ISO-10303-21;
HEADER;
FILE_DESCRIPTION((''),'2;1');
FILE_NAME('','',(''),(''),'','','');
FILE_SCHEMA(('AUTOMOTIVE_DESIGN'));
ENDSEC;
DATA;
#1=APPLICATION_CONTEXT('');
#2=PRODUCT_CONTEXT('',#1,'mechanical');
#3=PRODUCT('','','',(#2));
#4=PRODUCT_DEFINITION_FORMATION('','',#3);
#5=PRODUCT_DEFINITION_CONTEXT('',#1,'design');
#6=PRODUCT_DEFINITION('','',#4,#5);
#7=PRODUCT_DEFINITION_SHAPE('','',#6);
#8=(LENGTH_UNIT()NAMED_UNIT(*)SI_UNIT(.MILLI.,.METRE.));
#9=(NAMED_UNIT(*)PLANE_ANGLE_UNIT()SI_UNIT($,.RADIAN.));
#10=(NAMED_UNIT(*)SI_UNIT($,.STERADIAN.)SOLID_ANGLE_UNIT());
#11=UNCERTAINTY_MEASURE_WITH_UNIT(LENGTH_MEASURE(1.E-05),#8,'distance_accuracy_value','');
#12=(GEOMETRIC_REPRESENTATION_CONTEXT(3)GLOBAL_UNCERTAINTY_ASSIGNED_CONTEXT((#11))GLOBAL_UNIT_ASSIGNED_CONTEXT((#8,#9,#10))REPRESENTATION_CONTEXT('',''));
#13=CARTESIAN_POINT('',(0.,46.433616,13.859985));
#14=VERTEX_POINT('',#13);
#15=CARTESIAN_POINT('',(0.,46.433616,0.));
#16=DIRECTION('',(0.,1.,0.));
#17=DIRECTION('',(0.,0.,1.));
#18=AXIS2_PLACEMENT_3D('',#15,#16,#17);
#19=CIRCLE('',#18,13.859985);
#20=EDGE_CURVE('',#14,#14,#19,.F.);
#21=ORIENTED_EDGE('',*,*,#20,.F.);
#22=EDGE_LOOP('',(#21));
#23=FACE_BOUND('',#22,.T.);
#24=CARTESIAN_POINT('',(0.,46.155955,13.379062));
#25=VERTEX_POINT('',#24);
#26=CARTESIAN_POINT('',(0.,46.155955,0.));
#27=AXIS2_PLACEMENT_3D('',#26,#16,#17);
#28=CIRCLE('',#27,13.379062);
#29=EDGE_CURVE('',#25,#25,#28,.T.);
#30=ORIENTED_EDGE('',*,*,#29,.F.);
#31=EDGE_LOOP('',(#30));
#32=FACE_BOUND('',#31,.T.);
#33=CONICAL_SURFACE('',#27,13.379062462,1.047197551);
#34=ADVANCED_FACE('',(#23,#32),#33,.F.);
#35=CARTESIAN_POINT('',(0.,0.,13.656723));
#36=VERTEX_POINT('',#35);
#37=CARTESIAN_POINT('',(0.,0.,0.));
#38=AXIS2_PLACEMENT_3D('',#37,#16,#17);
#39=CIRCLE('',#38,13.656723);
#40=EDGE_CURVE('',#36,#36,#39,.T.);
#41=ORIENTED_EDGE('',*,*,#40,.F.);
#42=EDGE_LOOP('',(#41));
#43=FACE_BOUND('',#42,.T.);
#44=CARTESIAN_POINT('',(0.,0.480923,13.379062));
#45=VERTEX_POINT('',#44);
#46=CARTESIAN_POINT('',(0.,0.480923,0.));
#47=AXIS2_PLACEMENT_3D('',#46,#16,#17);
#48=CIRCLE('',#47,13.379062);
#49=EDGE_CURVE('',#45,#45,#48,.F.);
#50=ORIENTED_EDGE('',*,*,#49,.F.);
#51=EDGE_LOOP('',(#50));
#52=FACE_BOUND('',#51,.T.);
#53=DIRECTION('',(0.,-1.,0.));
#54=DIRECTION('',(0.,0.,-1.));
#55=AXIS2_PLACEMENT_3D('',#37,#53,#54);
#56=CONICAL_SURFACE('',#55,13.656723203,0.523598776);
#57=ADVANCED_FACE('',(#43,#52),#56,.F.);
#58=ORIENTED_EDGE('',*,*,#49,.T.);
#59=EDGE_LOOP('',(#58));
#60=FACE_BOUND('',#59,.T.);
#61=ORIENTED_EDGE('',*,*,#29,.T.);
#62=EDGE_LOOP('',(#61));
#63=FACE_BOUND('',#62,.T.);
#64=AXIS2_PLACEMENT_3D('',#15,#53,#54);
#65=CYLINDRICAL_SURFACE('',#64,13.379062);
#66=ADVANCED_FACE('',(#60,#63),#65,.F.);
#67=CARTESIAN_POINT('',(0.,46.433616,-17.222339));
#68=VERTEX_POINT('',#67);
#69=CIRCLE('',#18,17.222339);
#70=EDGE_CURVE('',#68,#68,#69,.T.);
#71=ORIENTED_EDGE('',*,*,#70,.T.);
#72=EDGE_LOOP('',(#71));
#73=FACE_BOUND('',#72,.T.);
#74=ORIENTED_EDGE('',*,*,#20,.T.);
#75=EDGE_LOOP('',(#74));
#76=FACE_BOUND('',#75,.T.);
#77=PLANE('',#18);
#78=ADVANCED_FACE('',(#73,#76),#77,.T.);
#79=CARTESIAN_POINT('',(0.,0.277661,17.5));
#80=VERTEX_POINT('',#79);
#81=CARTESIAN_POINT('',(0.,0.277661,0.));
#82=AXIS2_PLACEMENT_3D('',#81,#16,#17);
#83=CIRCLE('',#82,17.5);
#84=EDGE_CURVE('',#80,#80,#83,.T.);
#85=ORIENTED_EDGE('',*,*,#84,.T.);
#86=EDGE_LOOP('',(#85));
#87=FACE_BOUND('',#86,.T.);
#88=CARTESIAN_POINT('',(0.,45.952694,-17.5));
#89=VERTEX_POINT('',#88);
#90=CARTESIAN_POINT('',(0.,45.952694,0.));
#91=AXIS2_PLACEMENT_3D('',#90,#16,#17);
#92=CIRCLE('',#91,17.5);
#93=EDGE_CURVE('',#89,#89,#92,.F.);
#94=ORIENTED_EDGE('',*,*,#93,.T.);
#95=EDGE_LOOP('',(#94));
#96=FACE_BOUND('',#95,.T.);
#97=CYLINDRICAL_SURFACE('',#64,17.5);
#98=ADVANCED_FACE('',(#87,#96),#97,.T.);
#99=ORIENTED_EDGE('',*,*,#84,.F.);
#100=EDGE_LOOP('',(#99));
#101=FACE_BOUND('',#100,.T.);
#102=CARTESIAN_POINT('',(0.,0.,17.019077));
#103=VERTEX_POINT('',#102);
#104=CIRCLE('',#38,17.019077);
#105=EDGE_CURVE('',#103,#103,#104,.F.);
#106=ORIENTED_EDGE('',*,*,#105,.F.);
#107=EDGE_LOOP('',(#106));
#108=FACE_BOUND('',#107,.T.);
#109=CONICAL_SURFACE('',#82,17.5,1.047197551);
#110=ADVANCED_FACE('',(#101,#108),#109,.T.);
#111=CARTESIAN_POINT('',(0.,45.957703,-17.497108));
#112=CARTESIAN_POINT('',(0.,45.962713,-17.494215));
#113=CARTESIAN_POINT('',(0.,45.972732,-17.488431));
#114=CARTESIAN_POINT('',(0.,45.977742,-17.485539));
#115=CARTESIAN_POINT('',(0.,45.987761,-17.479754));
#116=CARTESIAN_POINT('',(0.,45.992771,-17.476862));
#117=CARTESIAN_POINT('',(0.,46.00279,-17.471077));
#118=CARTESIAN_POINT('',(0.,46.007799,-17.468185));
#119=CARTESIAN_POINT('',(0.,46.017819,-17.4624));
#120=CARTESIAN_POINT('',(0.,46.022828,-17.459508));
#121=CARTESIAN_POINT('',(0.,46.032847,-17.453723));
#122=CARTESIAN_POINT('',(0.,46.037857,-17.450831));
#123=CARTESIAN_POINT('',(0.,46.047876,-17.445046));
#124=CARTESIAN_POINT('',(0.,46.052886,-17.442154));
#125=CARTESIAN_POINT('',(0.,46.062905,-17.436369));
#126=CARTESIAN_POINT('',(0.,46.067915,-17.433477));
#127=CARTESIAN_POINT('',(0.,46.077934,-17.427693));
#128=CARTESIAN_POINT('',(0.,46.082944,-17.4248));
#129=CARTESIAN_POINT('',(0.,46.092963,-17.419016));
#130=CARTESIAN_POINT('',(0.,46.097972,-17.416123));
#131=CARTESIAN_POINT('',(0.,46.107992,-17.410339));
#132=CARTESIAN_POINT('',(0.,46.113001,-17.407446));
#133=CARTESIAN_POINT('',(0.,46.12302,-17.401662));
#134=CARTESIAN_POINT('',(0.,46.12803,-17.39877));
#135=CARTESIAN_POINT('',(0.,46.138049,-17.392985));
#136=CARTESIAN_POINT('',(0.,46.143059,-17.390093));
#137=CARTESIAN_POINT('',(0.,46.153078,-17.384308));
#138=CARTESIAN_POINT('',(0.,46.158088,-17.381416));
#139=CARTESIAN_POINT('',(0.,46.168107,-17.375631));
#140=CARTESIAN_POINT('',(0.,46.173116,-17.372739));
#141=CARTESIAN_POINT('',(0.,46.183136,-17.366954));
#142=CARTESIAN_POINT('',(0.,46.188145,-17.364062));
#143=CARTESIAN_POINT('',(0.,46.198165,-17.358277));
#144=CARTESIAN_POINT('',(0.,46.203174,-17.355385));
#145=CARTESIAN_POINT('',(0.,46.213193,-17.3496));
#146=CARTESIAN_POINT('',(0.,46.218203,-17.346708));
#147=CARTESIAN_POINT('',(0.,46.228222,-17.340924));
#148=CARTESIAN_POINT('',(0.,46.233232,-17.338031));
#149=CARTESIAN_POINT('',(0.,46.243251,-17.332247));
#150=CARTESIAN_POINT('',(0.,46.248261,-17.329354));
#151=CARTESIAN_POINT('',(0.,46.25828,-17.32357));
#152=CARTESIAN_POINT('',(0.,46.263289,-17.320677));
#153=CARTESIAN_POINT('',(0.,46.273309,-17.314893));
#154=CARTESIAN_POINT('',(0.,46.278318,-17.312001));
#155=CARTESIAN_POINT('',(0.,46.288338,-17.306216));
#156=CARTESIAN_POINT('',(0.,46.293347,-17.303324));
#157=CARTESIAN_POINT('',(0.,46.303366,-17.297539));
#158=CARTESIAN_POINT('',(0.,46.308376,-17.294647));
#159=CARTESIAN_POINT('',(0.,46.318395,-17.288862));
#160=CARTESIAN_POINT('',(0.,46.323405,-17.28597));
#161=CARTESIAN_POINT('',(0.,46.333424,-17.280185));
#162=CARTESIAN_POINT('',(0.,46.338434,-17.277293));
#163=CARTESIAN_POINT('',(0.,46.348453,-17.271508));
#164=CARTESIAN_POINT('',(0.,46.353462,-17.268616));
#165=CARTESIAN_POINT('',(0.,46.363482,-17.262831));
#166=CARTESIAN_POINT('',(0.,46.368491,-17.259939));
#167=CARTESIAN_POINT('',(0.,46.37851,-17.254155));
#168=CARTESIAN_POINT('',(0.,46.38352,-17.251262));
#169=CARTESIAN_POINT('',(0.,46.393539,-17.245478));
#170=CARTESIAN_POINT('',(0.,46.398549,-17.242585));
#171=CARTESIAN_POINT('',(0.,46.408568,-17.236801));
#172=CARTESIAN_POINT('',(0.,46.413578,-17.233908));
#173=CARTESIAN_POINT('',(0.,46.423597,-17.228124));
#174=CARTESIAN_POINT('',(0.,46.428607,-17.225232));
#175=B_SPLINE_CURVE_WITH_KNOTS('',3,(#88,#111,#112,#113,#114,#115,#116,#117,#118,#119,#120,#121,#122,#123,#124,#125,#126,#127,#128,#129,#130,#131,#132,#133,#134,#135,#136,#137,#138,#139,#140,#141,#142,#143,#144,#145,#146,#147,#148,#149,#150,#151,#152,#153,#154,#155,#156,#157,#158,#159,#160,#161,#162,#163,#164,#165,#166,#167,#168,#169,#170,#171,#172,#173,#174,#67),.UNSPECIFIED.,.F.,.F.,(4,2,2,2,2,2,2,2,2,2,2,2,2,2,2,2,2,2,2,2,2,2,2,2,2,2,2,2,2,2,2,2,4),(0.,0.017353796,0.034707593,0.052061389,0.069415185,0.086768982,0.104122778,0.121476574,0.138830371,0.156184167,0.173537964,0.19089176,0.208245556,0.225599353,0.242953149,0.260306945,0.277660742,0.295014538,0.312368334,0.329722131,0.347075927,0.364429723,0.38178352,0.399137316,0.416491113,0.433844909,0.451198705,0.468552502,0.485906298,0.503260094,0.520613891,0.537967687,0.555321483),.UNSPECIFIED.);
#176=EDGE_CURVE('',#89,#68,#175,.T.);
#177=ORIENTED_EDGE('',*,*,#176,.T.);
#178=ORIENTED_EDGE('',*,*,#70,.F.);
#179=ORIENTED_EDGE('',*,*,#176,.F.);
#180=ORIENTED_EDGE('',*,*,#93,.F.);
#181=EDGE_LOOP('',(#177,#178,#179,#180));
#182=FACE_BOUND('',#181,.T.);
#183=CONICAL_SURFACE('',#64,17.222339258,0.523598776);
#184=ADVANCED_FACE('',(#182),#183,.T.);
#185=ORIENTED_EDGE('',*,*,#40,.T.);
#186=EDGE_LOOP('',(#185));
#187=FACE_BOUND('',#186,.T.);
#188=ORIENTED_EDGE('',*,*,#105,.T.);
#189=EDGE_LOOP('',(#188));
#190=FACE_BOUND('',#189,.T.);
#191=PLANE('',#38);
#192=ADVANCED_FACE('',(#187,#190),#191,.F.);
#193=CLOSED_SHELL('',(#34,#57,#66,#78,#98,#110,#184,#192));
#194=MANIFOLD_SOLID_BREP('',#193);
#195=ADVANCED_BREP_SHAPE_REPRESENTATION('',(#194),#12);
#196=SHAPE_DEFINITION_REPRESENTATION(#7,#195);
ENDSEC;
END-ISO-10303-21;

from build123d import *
from OCP.BRepFilletAPI import BRepFilletAPI_MakeChamfer

# Parameters (mm, degrees)
SKETCH1_R           = 17.5
BOSS_EXTRUDE1_DEPTH = 46.433616193
SKETCH2_R           = 13.379062462
CUT_EXTRUDE1_DEPTH  = 53.617304309
CHAMFER1_SIZE       = 0.480922512
CHAMFER1_SIZE2      = 0.277660742


with BuildPart() as part:
    # Sketch1 → Boss-Extrude1 (new body)
    with BuildSketch(Plane(origin=(0, 0, 0), x_dir=(1, 0, 0), z_dir=(0, 1, 0))):
        Circle(SKETCH1_R)
    extrude(amount=BOSS_EXTRUDE1_DEPTH)

    # Sketch2 → Cut-Extrude1 (cut, through all)
    with BuildSketch(Plane(origin=(0, 0, 0), x_dir=(1, 0, 0), z_dir=(0, 1, 0))):
        Circle(SKETCH2_R)
    extrude(amount=CUT_EXTRUDE1_DEPTH, mode=Mode.SUBTRACT)

    # Chamfer1: one chamfer whose edges measure the first distance from different faces: ONE call of the kernel's chamfer builder (chamfer() names one face for all edges)
    chamfer1_edges_1 = [part.edges().sort_by_distance(p)[0] for p in [
        (-13.379062462, 46.433616193, 0),
    ]]
    chamfer1_side_1 = [part.faces().sort_by_distance(p)[0] for p in [
        (-17.005025253, 46.433616193, 0),
    ]]
    chamfer1_edges_2 = [part.edges().sort_by_distance(p)[0] for p in [
        (-13.379062462, 0, 0),
    ]]
    chamfer1_side_2 = [part.faces().sort_by_distance(p)[0] for p in [
        (-13.379062462, 23.216808096, 0),
    ]]
    chamfer1_edges_3 = [part.edges().sort_by_distance(p)[0] for p in [
        (-17.5, 0, 0),
    ]]
    chamfer1_side_3 = [part.faces().sort_by_distance(p)[0] for p in [
        (-17.005025253, 0, 0),
    ]]
    chamfer1_edges_4 = [part.edges().sort_by_distance(p)[0] for p in [
        (-17.5, 46.433616193, 0),
    ]]
    chamfer1_side_4 = [part.faces().sort_by_distance(p)[0] for p in [
        (-17.5, 23.216808096, 0),
    ]]
    chamfer1 = BRepFilletAPI_MakeChamfer(part.part.solid().wrapped)
    for e in chamfer1_edges_1:
        chamfer1.Add(CHAMFER1_SIZE, CHAMFER1_SIZE2, e.wrapped, chamfer1_side_1[0].wrapped)  # the first distance lies on this face
    for e in chamfer1_edges_2:
        chamfer1.Add(CHAMFER1_SIZE, CHAMFER1_SIZE2, e.wrapped, chamfer1_side_2[0].wrapped)  # the first distance lies on this face
    for e in chamfer1_edges_3:
        chamfer1.Add(CHAMFER1_SIZE, CHAMFER1_SIZE2, e.wrapped, chamfer1_side_3[0].wrapped)  # the first distance lies on this face
    for e in chamfer1_edges_4:
        chamfer1.Add(CHAMFER1_SIZE, CHAMFER1_SIZE2, e.wrapped, chamfer1_side_4[0].wrapped)  # the first distance lies on this face
    add(Compound.cast(chamfer1.Shape()), mode=Mode.REPLACE)


solid = part.part
